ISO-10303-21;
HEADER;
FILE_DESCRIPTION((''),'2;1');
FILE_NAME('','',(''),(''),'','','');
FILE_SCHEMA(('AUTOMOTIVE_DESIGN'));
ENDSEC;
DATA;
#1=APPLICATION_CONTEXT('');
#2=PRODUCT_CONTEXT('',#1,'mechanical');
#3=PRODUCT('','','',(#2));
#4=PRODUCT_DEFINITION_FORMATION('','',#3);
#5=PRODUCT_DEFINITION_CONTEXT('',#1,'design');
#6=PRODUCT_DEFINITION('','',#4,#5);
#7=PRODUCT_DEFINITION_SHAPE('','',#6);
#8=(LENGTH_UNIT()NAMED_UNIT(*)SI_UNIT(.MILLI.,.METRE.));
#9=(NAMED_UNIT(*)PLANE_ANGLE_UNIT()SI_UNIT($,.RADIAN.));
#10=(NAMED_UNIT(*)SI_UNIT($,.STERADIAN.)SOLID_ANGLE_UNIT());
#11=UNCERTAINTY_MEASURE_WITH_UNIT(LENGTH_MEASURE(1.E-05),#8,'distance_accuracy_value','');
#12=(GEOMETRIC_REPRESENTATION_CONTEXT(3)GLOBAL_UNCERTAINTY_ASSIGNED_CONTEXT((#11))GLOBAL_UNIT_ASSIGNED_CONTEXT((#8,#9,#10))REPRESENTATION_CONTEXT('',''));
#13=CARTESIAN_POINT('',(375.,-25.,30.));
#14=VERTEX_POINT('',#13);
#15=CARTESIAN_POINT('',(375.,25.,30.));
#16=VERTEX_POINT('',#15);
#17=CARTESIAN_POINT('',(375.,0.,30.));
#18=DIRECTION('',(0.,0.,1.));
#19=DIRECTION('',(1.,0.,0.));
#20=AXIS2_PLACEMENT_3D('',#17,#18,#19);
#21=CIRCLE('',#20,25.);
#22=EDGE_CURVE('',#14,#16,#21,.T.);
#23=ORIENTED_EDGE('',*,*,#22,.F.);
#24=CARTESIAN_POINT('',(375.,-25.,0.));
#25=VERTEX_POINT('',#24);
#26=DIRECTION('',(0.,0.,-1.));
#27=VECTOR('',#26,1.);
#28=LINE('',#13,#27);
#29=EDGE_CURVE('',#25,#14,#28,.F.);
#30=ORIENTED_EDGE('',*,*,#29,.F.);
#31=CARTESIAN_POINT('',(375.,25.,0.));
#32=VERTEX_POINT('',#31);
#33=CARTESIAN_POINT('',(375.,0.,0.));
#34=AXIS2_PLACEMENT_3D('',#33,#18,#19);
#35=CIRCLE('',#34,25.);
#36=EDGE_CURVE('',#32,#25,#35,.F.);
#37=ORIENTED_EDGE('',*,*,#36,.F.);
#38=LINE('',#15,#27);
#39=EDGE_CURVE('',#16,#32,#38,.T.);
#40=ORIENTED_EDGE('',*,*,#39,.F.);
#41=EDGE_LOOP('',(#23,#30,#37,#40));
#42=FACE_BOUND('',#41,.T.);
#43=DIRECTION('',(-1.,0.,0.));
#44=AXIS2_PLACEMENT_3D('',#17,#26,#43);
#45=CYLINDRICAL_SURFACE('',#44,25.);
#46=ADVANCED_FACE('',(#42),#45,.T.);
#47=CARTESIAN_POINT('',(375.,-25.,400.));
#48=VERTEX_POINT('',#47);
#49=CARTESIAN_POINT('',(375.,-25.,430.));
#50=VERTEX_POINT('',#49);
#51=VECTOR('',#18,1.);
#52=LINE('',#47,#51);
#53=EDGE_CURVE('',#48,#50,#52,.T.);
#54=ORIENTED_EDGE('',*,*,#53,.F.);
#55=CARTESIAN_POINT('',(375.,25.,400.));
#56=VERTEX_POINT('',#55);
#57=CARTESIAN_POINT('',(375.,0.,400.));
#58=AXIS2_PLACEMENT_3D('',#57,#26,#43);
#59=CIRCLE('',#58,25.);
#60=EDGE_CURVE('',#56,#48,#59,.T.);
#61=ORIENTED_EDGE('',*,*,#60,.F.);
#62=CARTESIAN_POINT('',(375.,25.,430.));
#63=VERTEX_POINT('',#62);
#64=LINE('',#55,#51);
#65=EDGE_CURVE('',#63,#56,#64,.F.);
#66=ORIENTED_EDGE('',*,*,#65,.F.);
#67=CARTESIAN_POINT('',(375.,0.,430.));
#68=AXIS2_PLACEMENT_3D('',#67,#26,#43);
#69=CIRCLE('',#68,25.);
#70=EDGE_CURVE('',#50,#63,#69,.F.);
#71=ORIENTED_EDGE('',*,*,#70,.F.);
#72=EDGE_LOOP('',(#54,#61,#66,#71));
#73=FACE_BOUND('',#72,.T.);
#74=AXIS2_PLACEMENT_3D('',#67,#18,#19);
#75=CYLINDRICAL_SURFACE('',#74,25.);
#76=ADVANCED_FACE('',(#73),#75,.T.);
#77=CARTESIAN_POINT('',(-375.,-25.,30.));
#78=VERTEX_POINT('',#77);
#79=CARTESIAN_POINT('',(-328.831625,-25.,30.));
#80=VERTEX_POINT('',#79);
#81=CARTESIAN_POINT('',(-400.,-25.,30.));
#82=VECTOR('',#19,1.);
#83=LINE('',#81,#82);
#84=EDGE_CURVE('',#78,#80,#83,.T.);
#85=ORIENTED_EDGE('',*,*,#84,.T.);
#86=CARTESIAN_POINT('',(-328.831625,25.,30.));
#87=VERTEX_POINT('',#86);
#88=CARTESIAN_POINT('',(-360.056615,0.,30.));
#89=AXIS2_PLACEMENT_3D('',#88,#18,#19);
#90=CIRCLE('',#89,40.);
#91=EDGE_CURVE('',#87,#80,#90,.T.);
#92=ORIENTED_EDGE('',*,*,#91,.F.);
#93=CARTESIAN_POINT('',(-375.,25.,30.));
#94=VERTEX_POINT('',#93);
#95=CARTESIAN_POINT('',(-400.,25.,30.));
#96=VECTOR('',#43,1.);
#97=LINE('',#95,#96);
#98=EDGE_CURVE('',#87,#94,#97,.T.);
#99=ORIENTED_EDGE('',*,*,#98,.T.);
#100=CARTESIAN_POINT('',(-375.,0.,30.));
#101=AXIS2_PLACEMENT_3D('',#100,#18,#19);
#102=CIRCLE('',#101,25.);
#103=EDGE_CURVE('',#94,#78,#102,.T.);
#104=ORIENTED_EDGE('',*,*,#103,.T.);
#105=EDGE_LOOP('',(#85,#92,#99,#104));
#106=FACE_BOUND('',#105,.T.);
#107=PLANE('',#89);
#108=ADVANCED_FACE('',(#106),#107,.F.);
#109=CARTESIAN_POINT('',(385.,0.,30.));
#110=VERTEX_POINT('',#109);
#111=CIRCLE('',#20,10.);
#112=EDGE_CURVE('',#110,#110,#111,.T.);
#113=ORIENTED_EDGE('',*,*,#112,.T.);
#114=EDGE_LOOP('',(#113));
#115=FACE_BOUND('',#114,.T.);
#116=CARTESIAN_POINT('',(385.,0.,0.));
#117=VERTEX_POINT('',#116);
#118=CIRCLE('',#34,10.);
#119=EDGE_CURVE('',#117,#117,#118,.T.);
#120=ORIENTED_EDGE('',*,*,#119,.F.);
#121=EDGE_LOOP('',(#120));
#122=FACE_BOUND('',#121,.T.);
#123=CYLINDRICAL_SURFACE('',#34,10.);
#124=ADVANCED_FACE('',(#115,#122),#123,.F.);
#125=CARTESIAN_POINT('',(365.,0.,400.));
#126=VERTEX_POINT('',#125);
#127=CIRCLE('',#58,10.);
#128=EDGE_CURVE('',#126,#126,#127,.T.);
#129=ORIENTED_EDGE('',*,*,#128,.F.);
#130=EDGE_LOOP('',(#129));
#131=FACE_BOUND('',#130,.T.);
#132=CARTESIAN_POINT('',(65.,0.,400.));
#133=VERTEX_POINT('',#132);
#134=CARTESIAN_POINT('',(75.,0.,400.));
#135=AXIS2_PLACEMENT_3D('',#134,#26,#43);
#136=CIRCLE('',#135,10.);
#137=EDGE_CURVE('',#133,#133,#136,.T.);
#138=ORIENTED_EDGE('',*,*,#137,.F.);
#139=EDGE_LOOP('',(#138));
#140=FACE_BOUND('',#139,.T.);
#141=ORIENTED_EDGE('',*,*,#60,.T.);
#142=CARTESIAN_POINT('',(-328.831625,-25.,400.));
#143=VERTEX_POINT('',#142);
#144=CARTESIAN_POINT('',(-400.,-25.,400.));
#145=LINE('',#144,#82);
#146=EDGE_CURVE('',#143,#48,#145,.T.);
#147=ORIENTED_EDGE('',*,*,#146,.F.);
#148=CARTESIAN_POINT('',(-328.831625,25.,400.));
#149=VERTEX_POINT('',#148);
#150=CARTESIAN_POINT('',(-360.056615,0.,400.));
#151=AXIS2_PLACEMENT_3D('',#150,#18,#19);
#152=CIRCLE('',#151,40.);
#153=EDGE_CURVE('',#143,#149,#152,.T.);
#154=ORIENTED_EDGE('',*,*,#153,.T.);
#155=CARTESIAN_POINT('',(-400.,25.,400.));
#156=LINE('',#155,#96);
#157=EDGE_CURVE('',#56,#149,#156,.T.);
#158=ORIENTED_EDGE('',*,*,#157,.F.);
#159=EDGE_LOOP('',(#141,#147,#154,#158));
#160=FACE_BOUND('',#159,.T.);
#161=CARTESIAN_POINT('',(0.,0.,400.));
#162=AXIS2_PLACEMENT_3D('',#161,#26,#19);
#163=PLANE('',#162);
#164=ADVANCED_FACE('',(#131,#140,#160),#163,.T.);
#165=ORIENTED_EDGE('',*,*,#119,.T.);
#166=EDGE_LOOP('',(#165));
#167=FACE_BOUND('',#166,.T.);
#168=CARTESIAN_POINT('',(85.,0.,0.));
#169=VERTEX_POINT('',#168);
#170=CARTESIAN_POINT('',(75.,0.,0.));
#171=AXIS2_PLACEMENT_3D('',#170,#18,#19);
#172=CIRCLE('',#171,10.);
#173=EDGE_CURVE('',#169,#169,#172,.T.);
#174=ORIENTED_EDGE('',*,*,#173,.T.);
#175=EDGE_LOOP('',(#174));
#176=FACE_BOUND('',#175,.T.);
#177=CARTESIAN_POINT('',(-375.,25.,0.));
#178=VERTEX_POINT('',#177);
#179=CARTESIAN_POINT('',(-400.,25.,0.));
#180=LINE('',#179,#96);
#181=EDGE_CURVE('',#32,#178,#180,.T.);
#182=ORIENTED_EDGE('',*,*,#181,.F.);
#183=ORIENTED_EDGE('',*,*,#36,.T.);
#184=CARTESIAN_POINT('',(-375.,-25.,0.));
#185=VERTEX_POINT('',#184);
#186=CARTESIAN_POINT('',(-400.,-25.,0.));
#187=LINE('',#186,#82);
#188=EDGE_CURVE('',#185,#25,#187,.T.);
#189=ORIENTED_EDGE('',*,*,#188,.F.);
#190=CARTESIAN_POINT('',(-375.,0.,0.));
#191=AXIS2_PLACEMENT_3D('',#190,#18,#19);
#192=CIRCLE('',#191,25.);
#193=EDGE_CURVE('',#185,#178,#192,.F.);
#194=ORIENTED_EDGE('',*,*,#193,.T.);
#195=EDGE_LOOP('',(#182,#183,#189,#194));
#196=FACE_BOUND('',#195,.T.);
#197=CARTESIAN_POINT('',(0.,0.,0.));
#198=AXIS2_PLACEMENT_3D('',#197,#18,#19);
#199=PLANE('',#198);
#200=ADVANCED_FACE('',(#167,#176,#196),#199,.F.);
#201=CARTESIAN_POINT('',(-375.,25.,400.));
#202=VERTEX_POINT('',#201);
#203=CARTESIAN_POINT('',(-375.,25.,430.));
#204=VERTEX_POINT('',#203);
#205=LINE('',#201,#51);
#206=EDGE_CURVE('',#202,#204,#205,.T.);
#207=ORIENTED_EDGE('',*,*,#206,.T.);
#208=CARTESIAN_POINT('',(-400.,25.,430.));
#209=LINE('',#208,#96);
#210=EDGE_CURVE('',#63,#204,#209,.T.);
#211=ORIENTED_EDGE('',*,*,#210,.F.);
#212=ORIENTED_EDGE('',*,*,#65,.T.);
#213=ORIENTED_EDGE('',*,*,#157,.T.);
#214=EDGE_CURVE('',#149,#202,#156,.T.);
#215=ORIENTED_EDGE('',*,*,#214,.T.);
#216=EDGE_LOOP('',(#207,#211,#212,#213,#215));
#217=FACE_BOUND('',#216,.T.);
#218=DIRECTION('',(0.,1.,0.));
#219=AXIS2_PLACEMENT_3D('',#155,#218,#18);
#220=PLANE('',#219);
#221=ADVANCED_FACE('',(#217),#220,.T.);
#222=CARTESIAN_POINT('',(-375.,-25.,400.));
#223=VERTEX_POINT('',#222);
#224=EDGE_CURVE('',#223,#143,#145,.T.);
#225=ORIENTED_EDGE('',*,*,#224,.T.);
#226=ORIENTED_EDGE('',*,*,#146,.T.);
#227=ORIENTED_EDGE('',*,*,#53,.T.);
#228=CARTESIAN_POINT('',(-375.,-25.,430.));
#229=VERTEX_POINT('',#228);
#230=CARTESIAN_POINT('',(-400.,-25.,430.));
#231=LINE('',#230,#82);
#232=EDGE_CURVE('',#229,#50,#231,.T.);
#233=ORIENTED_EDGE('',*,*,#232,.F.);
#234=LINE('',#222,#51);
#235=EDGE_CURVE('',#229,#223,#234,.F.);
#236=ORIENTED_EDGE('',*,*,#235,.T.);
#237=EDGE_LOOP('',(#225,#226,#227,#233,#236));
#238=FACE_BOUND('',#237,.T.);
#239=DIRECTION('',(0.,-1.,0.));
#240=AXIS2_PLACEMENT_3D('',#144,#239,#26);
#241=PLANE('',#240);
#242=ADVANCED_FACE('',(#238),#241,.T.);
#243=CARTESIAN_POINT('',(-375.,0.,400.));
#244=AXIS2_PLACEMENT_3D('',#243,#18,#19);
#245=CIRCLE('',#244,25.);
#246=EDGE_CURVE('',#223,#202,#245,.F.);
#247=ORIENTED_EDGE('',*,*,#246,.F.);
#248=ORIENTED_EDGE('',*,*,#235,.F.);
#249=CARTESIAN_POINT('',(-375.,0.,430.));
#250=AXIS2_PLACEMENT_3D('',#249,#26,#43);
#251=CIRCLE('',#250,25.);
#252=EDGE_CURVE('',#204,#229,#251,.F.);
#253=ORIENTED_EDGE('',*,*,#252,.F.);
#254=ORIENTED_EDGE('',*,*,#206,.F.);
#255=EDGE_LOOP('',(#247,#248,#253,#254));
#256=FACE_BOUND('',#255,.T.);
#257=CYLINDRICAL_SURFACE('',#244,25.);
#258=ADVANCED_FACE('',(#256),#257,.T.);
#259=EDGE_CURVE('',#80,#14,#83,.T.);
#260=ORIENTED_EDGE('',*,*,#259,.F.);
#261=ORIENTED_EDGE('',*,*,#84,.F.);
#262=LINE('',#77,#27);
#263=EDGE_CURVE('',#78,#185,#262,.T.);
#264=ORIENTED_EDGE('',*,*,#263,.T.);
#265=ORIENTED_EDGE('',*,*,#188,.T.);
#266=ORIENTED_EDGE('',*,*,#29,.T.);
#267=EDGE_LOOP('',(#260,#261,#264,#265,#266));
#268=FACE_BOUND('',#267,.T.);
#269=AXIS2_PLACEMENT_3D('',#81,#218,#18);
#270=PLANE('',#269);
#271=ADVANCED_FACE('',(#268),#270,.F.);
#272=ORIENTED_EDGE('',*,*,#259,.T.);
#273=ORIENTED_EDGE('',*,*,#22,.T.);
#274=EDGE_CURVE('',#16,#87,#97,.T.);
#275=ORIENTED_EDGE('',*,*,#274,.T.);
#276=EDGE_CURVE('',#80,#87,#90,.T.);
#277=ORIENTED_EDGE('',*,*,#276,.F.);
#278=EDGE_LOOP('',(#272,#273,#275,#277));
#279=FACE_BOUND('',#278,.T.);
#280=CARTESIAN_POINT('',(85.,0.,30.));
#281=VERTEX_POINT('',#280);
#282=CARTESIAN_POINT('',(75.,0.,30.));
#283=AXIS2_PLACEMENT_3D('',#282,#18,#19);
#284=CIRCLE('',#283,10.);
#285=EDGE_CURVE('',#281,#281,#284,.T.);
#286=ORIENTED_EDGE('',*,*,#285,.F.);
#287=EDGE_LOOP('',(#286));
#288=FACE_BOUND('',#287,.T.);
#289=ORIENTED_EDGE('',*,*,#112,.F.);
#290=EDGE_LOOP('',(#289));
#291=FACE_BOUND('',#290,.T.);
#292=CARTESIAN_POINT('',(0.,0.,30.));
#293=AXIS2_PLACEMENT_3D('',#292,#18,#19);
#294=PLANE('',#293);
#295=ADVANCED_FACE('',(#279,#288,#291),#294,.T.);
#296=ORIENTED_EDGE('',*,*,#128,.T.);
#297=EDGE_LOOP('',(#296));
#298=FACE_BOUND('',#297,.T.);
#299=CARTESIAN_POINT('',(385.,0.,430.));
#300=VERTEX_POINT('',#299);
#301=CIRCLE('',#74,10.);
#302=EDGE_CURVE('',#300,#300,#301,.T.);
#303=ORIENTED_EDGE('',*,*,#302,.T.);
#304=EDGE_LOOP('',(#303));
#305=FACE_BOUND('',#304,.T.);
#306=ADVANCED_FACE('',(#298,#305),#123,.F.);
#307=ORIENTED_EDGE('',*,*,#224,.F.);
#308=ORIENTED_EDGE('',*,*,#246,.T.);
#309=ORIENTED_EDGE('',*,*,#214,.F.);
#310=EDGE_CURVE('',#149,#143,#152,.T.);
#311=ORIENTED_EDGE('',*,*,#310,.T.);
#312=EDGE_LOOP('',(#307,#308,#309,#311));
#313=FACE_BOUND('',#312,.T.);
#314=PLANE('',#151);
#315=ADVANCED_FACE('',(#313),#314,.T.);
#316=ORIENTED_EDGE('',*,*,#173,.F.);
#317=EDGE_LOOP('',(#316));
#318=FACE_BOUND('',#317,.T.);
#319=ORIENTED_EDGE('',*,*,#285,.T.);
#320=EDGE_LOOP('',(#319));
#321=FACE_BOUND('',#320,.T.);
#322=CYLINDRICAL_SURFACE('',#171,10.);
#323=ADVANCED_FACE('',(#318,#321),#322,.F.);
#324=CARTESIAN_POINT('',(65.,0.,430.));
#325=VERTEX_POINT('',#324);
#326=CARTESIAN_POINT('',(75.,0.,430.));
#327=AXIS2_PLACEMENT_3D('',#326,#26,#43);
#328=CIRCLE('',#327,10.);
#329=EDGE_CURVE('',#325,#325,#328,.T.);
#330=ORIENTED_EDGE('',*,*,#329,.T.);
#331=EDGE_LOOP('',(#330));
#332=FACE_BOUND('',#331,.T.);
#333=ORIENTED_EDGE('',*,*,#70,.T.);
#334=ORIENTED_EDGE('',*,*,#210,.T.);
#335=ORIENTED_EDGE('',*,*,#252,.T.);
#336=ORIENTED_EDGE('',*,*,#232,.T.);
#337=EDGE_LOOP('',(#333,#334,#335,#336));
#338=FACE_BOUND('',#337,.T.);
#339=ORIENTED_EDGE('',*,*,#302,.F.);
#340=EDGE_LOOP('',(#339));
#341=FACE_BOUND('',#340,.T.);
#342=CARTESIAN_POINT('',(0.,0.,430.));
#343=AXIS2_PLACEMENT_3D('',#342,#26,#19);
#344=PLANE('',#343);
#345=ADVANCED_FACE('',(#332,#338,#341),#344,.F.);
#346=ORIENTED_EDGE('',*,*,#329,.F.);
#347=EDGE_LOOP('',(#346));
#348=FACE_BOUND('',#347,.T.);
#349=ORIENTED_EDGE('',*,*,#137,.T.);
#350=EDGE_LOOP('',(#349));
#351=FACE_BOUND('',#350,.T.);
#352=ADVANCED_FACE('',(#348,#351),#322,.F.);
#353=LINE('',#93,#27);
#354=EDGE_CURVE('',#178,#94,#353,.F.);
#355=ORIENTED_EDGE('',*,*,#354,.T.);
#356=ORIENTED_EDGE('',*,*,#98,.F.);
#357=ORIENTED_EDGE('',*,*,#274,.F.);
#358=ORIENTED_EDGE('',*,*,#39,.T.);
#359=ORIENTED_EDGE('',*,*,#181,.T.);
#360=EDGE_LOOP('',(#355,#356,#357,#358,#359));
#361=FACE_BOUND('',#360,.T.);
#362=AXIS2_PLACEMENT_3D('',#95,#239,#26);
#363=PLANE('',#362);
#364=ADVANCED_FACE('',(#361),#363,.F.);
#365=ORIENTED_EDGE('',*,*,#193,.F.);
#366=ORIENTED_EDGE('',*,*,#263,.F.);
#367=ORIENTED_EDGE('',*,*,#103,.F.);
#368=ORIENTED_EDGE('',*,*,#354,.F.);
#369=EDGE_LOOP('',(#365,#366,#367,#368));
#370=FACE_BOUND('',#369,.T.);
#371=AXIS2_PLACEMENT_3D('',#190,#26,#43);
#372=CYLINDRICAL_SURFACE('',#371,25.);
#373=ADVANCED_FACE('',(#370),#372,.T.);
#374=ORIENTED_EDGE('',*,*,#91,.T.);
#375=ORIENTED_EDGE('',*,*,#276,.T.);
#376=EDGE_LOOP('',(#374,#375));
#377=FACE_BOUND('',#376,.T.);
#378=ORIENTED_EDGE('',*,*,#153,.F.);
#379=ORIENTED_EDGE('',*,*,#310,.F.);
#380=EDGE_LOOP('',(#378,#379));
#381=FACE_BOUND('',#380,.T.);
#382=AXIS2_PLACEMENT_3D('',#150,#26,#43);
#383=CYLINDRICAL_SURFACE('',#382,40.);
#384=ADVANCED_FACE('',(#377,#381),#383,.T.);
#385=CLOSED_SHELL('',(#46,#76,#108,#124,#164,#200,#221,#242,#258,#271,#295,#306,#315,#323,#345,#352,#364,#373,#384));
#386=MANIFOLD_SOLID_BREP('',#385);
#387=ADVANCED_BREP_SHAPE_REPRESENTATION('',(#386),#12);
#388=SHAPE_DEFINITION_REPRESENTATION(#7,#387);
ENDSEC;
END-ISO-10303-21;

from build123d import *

# Parameters (mm, degrees)
SKETCH1_W                   = 800
SKETCH1_H                   = 50
BOSS_EXTRUDE1_DEPTH         = 30
SKETCH2_R                   = 40
BOSS_EXTRUDE2_DEPTH         = 370
FILLET5_RADIUS              = 25
FILLET5_LENGTH              = 30
FILLET6_R                   = 25
FILLET5_OF_MIRROR3_2_RADIUS = 25
FILLET5_OF_MIRROR3_2_LENGTH = 30
FILLET6_OF_MIRROR3_R        = 25
CUT_EXTRUDE3_DEPTH          = 589.680979382
CUT_EXTRUDE3_DEPTH_BACK     = 589.680979382
SKETCH5_R                   = 10
SKETCH6_R                   = 10
CUT_EXTRUDE4_DEPTH          = 589.680979382


with BuildPart() as part:
    # Sketch1 → Boss-Extrude1 (new body)
    with BuildSketch(Plane.XY):
        Rectangle(SKETCH1_W, SKETCH1_H)
    boss_extrude1 = extrude(amount=BOSS_EXTRUDE1_DEPTH)

    # Sketch2 → Boss-Extrude2 (add)
    with BuildSketch(Plane.XY.offset(30)):
        with Locations(Location((-360.056615351, 0, 0), (0, 0, 176.951220784))):
            Circle(SKETCH2_R)
    extrude(amount=BOSS_EXTRUDE2_DEPTH)

    # Fillet5: full round fillet: the end face becomes a half cylinder, R = half its width
    fillet5_face = Plane((400, 0, 15), x_dir=(0, 0, -1), z_dir=(1, 0, 0))  # on the end face: x along it, z out of the body
    fillet5_slab = fillet5_face.offset(-FILLET5_RADIUS / 2) * Box(FILLET5_LENGTH, 2 * FILLET5_RADIUS, FILLET5_RADIUS, mode=Mode.PRIVATE)  # the body's end, R deep
    fillet5_round = Plane((375, 0, 15), x_dir=(1, 0, 0), z_dir=(0, 0, -1)) * Cylinder(FILLET5_RADIUS, FILLET5_LENGTH, mode=Mode.PRIVATE)  # its axis R under the face
    add(fillet5_slab - fillet5_round, mode=Mode.SUBTRACT)

    # Fillet6
    # the kernel refuses this fillet: 25 mm, written as the material it takes off along each edge
    with BuildSketch(Plane(origin=(-400, -25, -62.5), x_dir=(0, 1, 0), z_dir=(0, 0, 1)), Plane(origin=(-400, 25, -62.5), x_dir=(1, 0, 0), z_dir=(0, 0, 1))) as fillet6_piece_1:
        with BuildLine():
            CenterArc((FILLET6_R, -FILLET6_R), FILLET6_R, 90, 90)
            Line((0, -FILLET6_R), (0, 0))
            Line((0, 0), (FILLET6_R, 0))
        make_face()
    extrude(amount=92.5, mode=Mode.SUBTRACT)

    # Mirror3: Boss-Extrude1 across plane
    add(boss_extrude1.mirror(Plane.XY.offset(215)))

    # Fillet5 of Mirror3 2: full round fillet: the end face becomes a half cylinder, R = half its width
    fillet5_of_mirror3_2_face = Plane((400, 0, 415), x_dir=(0, 0, 1), z_dir=(1, 0, 0))  # on the end face: x along it, z out of the body
    fillet5_of_mirror3_2_slab = fillet5_of_mirror3_2_face.offset(-FILLET5_OF_MIRROR3_2_RADIUS / 2) * Box(FILLET5_OF_MIRROR3_2_LENGTH, 2 * FILLET5_OF_MIRROR3_2_RADIUS, FILLET5_OF_MIRROR3_2_RADIUS, mode=Mode.PRIVATE)  # the body's end, R deep
    fillet5_of_mirror3_2_round = Plane((375, 0, 415), x_dir=(1, 0, 0), z_dir=(0, 0, 1)) * Cylinder(FILLET5_OF_MIRROR3_2_RADIUS, FILLET5_OF_MIRROR3_2_LENGTH, mode=Mode.PRIVATE)  # its axis R under the face
    add(fillet5_of_mirror3_2_slab - fillet5_of_mirror3_2_round, mode=Mode.SUBTRACT)

    # Fillet6 of Mirror3
    # the kernel refuses this fillet: 25 mm, written as the material it takes off along each edge
    with BuildSketch(Plane(origin=(-400, -25, 492.5), x_dir=(0, 1, 0), z_dir=(0, 0, -1))) as fillet6_of_mirror3_piece_1:
        with BuildLine():
            CenterArc((FILLET6_OF_MIRROR3_R, FILLET6_OF_MIRROR3_R), FILLET6_OF_MIRROR3_R, 180, 90)
            Line((0, FILLET6_OF_MIRROR3_R), (0, 0))
            Line((0, 0), (FILLET6_OF_MIRROR3_R, 0))
        make_face()
    extrude(amount=92.5, mode=Mode.SUBTRACT)
    with BuildSketch(Plane(origin=(-400, 25, 492.5), x_dir=(0, -1, 0), z_dir=(0, 0, -1))) as fillet6_of_mirror3_piece_2:
        with BuildLine():
            CenterArc((FILLET6_OF_MIRROR3_R, -FILLET6_OF_MIRROR3_R), FILLET6_OF_MIRROR3_R, 90, 90)
            Line((0, -FILLET6_OF_MIRROR3_R), (0, 0))
            Line((0, 0), (FILLET6_OF_MIRROR3_R, 0))
        make_face()
    extrude(amount=92.5, mode=Mode.SUBTRACT)

    # Sketch5 → Cut-Extrude3 (cut, two sides: drawn at the far end of the back side and taken through both)
    with BuildSketch(Plane.XY.offset(430).offset(-CUT_EXTRUDE3_DEPTH_BACK)):
        with Locations(Location((75, 0, 0), (0, 0, 180))):
            Circle(SKETCH5_R)
    extrude(amount=CUT_EXTRUDE3_DEPTH + CUT_EXTRUDE3_DEPTH_BACK, mode=Mode.SUBTRACT)

    # Sketch6 → Cut-Extrude4 (cut, through all)
    with BuildSketch(Plane.XY.offset(430)):
        with Locations((375, 0)):
            Circle(SKETCH6_R)
    extrude(amount=-CUT_EXTRUDE4_DEPTH, mode=Mode.SUBTRACT)


solid = part.part
